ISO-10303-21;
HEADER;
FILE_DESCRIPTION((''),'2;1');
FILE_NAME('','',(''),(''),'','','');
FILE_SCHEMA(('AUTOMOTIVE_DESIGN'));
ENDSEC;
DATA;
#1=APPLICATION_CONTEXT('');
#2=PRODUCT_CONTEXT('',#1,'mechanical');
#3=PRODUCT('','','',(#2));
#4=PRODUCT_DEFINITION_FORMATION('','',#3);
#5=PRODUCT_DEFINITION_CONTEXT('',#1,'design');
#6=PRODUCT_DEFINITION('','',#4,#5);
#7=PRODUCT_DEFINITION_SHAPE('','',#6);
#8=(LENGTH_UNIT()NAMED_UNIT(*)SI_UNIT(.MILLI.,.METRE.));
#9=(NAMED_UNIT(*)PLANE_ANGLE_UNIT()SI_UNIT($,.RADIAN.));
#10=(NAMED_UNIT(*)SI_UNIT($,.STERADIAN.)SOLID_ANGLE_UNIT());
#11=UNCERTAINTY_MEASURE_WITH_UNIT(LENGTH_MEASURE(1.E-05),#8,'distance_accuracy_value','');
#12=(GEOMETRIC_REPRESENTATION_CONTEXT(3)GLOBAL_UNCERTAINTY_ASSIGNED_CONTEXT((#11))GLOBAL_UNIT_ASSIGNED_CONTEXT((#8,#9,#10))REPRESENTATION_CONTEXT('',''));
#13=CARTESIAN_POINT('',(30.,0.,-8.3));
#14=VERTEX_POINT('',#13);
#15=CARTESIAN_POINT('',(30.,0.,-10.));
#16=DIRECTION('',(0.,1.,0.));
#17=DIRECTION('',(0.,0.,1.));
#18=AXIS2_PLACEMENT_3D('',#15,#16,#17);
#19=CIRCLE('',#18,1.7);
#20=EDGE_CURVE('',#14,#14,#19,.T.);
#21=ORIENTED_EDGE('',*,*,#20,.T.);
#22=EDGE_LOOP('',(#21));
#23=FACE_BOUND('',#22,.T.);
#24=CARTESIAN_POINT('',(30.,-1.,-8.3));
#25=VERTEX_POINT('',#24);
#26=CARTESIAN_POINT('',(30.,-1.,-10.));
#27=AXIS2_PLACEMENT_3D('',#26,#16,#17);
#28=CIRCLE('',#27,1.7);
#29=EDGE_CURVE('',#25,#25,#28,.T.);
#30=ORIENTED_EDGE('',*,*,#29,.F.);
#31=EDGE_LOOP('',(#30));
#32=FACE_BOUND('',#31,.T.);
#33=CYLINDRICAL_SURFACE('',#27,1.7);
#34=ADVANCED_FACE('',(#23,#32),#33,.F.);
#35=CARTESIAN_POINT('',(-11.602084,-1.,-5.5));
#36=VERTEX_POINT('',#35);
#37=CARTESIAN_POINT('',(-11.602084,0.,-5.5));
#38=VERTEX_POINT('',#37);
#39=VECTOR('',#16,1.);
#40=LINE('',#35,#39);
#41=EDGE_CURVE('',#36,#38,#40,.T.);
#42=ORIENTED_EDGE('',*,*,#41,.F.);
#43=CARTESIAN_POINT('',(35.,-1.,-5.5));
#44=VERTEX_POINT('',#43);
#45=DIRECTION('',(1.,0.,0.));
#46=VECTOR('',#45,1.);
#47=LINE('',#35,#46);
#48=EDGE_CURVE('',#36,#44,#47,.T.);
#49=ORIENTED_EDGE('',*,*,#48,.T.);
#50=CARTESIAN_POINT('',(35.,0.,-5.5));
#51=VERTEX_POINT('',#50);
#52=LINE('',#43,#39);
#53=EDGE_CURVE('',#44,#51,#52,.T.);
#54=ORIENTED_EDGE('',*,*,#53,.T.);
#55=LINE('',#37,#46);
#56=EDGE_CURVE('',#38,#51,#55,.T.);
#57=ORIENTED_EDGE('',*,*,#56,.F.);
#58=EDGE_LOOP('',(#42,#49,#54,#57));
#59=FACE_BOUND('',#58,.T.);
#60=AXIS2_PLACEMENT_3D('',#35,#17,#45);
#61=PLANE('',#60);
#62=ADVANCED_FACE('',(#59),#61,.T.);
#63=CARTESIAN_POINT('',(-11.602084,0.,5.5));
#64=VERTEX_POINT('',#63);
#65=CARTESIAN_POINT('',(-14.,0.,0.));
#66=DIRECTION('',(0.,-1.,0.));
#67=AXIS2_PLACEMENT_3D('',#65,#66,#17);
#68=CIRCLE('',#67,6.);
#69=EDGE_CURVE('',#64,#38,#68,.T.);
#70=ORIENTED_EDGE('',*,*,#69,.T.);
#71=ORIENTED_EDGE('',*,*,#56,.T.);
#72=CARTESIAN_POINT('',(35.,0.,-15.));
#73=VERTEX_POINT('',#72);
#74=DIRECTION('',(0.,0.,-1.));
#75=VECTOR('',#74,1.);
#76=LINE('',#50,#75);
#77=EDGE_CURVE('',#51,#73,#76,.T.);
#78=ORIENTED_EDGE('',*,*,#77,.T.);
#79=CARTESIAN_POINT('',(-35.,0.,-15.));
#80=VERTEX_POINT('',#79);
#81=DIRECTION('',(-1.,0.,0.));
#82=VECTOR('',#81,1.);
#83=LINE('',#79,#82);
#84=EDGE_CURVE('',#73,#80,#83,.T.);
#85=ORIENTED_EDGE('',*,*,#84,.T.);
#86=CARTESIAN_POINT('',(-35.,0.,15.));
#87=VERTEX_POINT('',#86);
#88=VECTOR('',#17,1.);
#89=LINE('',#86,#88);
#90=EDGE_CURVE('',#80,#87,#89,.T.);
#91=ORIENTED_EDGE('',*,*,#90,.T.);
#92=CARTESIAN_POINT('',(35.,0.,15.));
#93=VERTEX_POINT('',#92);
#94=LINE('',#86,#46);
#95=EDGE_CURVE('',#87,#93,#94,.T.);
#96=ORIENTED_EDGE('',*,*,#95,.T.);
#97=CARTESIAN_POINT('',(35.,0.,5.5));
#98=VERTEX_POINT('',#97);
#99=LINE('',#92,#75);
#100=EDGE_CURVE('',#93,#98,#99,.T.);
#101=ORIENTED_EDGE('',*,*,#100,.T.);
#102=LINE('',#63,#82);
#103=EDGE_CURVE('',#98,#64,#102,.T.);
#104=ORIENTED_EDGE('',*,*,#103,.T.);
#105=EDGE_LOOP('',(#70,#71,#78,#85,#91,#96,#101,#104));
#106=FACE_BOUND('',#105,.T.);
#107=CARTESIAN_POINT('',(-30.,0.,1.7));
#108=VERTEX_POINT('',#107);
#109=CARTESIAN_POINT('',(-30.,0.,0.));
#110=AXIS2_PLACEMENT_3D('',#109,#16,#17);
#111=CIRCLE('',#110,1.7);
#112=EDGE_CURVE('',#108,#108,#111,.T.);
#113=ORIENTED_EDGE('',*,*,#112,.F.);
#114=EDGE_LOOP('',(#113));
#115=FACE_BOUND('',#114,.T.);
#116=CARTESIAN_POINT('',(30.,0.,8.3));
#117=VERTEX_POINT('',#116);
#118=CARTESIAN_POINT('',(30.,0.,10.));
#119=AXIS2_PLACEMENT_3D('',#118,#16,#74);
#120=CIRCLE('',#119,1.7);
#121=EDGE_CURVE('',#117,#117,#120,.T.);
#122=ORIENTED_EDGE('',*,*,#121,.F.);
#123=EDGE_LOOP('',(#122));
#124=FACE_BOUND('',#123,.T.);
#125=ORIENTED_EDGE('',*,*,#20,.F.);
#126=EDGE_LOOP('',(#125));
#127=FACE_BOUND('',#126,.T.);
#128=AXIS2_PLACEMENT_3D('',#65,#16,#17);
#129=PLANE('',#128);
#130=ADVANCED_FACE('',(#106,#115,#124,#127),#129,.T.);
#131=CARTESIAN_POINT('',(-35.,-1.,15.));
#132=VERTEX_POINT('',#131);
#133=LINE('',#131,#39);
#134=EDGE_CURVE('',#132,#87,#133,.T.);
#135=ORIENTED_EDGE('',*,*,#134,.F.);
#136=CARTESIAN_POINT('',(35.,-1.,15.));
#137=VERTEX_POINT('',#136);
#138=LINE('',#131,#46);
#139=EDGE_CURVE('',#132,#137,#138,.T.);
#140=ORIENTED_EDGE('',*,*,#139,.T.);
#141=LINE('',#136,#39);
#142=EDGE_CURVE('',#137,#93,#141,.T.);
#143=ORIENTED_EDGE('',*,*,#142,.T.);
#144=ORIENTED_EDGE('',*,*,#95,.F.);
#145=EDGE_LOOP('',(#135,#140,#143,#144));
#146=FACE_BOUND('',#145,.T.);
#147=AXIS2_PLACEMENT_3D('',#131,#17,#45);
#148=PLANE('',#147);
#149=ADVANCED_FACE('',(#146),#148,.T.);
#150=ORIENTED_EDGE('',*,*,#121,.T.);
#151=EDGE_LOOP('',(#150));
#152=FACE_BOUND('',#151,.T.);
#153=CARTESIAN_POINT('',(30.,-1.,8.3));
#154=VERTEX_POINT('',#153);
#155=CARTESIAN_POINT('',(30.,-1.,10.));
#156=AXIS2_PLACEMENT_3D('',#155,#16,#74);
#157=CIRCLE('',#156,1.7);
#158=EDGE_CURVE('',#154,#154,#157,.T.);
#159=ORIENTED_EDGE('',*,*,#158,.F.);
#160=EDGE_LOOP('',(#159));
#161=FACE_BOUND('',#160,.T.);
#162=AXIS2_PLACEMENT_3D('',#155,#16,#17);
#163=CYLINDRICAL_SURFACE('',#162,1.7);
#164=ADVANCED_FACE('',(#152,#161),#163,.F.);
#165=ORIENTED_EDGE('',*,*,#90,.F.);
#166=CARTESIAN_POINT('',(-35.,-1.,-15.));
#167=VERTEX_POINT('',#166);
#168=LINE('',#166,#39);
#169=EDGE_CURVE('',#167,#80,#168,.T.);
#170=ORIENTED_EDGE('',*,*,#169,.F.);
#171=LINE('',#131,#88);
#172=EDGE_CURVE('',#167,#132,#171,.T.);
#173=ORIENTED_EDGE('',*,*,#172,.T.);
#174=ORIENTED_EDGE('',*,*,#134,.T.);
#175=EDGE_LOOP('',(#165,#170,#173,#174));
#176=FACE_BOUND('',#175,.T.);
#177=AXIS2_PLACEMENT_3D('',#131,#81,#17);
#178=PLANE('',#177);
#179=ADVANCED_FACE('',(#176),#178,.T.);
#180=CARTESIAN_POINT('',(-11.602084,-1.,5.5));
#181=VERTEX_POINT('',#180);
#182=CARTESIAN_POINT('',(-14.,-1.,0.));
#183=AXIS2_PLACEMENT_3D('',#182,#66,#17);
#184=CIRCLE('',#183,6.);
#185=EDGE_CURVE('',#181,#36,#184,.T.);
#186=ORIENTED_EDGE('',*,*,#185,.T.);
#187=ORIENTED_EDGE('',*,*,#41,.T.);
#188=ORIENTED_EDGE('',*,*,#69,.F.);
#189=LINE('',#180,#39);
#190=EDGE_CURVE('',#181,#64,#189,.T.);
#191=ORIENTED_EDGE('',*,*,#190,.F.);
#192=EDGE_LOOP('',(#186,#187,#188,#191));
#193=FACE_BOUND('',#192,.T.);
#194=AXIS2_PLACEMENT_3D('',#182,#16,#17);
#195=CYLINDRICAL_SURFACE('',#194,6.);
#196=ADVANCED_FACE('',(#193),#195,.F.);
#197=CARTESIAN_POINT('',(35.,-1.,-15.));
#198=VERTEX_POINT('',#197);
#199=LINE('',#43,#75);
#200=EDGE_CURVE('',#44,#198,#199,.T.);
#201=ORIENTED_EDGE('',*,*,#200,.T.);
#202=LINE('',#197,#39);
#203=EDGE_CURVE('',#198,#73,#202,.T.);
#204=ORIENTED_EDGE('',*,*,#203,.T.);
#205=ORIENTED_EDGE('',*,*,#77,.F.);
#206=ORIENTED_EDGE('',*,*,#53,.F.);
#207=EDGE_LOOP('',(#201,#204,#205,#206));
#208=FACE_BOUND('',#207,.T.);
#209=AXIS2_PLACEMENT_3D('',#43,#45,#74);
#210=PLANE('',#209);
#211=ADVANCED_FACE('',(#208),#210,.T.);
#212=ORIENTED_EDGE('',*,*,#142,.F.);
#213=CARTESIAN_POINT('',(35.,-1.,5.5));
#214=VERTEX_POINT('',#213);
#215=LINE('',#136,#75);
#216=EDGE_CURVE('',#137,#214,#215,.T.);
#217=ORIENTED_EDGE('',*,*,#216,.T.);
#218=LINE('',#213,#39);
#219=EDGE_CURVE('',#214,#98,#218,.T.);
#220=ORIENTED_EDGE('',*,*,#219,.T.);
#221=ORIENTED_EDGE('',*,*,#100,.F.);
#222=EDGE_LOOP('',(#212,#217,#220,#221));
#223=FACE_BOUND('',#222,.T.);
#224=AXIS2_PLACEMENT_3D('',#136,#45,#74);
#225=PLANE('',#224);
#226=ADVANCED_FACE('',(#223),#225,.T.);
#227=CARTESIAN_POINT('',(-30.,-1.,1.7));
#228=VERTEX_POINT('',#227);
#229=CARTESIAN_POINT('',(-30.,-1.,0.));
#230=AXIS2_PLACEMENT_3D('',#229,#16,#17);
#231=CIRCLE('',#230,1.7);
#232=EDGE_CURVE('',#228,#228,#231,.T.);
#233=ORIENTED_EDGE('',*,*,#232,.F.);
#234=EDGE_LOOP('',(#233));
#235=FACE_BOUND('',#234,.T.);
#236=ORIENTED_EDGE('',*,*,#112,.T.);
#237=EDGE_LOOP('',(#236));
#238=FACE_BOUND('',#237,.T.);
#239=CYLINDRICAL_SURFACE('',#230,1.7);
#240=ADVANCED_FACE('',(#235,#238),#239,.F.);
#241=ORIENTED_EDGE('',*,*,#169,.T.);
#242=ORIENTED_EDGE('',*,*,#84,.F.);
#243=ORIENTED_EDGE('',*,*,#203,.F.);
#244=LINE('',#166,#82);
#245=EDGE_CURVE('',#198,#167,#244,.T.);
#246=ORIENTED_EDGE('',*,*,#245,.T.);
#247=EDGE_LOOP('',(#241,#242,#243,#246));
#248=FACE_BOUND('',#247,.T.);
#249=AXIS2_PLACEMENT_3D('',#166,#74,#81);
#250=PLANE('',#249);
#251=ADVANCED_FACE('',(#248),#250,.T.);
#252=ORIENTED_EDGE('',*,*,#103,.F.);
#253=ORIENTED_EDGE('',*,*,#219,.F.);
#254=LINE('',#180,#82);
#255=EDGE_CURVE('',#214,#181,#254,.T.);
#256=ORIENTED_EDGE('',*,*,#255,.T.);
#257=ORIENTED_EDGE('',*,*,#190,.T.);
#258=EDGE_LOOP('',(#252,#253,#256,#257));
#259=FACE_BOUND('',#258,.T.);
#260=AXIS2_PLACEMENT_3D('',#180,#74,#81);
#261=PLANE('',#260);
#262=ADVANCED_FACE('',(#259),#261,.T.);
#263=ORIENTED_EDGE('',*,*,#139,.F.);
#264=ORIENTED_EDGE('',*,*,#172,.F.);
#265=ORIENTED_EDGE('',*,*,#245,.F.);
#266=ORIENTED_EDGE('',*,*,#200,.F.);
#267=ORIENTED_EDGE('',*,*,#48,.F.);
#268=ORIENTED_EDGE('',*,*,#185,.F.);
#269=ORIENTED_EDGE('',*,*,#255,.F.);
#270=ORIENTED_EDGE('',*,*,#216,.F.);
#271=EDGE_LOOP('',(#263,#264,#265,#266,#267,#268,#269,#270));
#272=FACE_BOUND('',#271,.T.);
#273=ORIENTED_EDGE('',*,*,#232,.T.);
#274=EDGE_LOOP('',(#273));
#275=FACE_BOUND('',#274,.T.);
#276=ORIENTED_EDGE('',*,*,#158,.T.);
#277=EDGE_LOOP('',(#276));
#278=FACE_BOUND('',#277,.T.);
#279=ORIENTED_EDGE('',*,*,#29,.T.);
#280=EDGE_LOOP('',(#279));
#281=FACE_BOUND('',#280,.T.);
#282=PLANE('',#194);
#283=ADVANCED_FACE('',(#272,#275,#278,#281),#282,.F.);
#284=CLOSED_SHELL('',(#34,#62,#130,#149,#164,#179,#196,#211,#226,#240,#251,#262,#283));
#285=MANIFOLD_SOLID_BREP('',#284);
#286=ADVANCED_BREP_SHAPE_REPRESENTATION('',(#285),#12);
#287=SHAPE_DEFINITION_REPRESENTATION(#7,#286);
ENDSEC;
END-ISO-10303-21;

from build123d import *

# Parameters (mm, degrees)
ESQUISSE1_R               = 1.7
T_LE_DE_BASE_PLI_E1_DEPTH = 1


# Sheet-metal steps are written as plain solids
with BuildPart() as part:
    # Esquisse1 → Tôle de base pliée1 (new body)
    with BuildSketch(Plane(origin=(0, 0, 0), x_dir=(1, 0, 0), z_dir=(0, 1, 0))):
        with BuildLine():
            Line((-35, -15), (35, -15))
            Line((35, -15), (35, -5.5))
            Line((35, -5.5), (-11.602084238, -5.5))
            ThreePointArc((-11.602084238, -5.5), (-20, 0), (-11.602084238, 5.5))
            Line((-11.602084238, 5.5), (35, 5.5))
            Line((35, 5.5), (35, 15))
            Line((35, 15), (-35, 15))
            Line((-35, 15), (-35, -15))
        make_face()
        with Locations(Location((30, 10, 0), (0, 0, 270))):
            Circle(ESQUISSE1_R, mode=Mode.SUBTRACT)
        with Locations(Location((30, -10, 0), (0, 0, 90))):
            Circle(ESQUISSE1_R, mode=Mode.SUBTRACT)
        with Locations(Location((-30, 0, 0), (0, 0, 270))):
            Circle(ESQUISSE1_R, mode=Mode.SUBTRACT)
    extrude(amount=-T_LE_DE_BASE_PLI_E1_DEPTH)


solid = part.part
